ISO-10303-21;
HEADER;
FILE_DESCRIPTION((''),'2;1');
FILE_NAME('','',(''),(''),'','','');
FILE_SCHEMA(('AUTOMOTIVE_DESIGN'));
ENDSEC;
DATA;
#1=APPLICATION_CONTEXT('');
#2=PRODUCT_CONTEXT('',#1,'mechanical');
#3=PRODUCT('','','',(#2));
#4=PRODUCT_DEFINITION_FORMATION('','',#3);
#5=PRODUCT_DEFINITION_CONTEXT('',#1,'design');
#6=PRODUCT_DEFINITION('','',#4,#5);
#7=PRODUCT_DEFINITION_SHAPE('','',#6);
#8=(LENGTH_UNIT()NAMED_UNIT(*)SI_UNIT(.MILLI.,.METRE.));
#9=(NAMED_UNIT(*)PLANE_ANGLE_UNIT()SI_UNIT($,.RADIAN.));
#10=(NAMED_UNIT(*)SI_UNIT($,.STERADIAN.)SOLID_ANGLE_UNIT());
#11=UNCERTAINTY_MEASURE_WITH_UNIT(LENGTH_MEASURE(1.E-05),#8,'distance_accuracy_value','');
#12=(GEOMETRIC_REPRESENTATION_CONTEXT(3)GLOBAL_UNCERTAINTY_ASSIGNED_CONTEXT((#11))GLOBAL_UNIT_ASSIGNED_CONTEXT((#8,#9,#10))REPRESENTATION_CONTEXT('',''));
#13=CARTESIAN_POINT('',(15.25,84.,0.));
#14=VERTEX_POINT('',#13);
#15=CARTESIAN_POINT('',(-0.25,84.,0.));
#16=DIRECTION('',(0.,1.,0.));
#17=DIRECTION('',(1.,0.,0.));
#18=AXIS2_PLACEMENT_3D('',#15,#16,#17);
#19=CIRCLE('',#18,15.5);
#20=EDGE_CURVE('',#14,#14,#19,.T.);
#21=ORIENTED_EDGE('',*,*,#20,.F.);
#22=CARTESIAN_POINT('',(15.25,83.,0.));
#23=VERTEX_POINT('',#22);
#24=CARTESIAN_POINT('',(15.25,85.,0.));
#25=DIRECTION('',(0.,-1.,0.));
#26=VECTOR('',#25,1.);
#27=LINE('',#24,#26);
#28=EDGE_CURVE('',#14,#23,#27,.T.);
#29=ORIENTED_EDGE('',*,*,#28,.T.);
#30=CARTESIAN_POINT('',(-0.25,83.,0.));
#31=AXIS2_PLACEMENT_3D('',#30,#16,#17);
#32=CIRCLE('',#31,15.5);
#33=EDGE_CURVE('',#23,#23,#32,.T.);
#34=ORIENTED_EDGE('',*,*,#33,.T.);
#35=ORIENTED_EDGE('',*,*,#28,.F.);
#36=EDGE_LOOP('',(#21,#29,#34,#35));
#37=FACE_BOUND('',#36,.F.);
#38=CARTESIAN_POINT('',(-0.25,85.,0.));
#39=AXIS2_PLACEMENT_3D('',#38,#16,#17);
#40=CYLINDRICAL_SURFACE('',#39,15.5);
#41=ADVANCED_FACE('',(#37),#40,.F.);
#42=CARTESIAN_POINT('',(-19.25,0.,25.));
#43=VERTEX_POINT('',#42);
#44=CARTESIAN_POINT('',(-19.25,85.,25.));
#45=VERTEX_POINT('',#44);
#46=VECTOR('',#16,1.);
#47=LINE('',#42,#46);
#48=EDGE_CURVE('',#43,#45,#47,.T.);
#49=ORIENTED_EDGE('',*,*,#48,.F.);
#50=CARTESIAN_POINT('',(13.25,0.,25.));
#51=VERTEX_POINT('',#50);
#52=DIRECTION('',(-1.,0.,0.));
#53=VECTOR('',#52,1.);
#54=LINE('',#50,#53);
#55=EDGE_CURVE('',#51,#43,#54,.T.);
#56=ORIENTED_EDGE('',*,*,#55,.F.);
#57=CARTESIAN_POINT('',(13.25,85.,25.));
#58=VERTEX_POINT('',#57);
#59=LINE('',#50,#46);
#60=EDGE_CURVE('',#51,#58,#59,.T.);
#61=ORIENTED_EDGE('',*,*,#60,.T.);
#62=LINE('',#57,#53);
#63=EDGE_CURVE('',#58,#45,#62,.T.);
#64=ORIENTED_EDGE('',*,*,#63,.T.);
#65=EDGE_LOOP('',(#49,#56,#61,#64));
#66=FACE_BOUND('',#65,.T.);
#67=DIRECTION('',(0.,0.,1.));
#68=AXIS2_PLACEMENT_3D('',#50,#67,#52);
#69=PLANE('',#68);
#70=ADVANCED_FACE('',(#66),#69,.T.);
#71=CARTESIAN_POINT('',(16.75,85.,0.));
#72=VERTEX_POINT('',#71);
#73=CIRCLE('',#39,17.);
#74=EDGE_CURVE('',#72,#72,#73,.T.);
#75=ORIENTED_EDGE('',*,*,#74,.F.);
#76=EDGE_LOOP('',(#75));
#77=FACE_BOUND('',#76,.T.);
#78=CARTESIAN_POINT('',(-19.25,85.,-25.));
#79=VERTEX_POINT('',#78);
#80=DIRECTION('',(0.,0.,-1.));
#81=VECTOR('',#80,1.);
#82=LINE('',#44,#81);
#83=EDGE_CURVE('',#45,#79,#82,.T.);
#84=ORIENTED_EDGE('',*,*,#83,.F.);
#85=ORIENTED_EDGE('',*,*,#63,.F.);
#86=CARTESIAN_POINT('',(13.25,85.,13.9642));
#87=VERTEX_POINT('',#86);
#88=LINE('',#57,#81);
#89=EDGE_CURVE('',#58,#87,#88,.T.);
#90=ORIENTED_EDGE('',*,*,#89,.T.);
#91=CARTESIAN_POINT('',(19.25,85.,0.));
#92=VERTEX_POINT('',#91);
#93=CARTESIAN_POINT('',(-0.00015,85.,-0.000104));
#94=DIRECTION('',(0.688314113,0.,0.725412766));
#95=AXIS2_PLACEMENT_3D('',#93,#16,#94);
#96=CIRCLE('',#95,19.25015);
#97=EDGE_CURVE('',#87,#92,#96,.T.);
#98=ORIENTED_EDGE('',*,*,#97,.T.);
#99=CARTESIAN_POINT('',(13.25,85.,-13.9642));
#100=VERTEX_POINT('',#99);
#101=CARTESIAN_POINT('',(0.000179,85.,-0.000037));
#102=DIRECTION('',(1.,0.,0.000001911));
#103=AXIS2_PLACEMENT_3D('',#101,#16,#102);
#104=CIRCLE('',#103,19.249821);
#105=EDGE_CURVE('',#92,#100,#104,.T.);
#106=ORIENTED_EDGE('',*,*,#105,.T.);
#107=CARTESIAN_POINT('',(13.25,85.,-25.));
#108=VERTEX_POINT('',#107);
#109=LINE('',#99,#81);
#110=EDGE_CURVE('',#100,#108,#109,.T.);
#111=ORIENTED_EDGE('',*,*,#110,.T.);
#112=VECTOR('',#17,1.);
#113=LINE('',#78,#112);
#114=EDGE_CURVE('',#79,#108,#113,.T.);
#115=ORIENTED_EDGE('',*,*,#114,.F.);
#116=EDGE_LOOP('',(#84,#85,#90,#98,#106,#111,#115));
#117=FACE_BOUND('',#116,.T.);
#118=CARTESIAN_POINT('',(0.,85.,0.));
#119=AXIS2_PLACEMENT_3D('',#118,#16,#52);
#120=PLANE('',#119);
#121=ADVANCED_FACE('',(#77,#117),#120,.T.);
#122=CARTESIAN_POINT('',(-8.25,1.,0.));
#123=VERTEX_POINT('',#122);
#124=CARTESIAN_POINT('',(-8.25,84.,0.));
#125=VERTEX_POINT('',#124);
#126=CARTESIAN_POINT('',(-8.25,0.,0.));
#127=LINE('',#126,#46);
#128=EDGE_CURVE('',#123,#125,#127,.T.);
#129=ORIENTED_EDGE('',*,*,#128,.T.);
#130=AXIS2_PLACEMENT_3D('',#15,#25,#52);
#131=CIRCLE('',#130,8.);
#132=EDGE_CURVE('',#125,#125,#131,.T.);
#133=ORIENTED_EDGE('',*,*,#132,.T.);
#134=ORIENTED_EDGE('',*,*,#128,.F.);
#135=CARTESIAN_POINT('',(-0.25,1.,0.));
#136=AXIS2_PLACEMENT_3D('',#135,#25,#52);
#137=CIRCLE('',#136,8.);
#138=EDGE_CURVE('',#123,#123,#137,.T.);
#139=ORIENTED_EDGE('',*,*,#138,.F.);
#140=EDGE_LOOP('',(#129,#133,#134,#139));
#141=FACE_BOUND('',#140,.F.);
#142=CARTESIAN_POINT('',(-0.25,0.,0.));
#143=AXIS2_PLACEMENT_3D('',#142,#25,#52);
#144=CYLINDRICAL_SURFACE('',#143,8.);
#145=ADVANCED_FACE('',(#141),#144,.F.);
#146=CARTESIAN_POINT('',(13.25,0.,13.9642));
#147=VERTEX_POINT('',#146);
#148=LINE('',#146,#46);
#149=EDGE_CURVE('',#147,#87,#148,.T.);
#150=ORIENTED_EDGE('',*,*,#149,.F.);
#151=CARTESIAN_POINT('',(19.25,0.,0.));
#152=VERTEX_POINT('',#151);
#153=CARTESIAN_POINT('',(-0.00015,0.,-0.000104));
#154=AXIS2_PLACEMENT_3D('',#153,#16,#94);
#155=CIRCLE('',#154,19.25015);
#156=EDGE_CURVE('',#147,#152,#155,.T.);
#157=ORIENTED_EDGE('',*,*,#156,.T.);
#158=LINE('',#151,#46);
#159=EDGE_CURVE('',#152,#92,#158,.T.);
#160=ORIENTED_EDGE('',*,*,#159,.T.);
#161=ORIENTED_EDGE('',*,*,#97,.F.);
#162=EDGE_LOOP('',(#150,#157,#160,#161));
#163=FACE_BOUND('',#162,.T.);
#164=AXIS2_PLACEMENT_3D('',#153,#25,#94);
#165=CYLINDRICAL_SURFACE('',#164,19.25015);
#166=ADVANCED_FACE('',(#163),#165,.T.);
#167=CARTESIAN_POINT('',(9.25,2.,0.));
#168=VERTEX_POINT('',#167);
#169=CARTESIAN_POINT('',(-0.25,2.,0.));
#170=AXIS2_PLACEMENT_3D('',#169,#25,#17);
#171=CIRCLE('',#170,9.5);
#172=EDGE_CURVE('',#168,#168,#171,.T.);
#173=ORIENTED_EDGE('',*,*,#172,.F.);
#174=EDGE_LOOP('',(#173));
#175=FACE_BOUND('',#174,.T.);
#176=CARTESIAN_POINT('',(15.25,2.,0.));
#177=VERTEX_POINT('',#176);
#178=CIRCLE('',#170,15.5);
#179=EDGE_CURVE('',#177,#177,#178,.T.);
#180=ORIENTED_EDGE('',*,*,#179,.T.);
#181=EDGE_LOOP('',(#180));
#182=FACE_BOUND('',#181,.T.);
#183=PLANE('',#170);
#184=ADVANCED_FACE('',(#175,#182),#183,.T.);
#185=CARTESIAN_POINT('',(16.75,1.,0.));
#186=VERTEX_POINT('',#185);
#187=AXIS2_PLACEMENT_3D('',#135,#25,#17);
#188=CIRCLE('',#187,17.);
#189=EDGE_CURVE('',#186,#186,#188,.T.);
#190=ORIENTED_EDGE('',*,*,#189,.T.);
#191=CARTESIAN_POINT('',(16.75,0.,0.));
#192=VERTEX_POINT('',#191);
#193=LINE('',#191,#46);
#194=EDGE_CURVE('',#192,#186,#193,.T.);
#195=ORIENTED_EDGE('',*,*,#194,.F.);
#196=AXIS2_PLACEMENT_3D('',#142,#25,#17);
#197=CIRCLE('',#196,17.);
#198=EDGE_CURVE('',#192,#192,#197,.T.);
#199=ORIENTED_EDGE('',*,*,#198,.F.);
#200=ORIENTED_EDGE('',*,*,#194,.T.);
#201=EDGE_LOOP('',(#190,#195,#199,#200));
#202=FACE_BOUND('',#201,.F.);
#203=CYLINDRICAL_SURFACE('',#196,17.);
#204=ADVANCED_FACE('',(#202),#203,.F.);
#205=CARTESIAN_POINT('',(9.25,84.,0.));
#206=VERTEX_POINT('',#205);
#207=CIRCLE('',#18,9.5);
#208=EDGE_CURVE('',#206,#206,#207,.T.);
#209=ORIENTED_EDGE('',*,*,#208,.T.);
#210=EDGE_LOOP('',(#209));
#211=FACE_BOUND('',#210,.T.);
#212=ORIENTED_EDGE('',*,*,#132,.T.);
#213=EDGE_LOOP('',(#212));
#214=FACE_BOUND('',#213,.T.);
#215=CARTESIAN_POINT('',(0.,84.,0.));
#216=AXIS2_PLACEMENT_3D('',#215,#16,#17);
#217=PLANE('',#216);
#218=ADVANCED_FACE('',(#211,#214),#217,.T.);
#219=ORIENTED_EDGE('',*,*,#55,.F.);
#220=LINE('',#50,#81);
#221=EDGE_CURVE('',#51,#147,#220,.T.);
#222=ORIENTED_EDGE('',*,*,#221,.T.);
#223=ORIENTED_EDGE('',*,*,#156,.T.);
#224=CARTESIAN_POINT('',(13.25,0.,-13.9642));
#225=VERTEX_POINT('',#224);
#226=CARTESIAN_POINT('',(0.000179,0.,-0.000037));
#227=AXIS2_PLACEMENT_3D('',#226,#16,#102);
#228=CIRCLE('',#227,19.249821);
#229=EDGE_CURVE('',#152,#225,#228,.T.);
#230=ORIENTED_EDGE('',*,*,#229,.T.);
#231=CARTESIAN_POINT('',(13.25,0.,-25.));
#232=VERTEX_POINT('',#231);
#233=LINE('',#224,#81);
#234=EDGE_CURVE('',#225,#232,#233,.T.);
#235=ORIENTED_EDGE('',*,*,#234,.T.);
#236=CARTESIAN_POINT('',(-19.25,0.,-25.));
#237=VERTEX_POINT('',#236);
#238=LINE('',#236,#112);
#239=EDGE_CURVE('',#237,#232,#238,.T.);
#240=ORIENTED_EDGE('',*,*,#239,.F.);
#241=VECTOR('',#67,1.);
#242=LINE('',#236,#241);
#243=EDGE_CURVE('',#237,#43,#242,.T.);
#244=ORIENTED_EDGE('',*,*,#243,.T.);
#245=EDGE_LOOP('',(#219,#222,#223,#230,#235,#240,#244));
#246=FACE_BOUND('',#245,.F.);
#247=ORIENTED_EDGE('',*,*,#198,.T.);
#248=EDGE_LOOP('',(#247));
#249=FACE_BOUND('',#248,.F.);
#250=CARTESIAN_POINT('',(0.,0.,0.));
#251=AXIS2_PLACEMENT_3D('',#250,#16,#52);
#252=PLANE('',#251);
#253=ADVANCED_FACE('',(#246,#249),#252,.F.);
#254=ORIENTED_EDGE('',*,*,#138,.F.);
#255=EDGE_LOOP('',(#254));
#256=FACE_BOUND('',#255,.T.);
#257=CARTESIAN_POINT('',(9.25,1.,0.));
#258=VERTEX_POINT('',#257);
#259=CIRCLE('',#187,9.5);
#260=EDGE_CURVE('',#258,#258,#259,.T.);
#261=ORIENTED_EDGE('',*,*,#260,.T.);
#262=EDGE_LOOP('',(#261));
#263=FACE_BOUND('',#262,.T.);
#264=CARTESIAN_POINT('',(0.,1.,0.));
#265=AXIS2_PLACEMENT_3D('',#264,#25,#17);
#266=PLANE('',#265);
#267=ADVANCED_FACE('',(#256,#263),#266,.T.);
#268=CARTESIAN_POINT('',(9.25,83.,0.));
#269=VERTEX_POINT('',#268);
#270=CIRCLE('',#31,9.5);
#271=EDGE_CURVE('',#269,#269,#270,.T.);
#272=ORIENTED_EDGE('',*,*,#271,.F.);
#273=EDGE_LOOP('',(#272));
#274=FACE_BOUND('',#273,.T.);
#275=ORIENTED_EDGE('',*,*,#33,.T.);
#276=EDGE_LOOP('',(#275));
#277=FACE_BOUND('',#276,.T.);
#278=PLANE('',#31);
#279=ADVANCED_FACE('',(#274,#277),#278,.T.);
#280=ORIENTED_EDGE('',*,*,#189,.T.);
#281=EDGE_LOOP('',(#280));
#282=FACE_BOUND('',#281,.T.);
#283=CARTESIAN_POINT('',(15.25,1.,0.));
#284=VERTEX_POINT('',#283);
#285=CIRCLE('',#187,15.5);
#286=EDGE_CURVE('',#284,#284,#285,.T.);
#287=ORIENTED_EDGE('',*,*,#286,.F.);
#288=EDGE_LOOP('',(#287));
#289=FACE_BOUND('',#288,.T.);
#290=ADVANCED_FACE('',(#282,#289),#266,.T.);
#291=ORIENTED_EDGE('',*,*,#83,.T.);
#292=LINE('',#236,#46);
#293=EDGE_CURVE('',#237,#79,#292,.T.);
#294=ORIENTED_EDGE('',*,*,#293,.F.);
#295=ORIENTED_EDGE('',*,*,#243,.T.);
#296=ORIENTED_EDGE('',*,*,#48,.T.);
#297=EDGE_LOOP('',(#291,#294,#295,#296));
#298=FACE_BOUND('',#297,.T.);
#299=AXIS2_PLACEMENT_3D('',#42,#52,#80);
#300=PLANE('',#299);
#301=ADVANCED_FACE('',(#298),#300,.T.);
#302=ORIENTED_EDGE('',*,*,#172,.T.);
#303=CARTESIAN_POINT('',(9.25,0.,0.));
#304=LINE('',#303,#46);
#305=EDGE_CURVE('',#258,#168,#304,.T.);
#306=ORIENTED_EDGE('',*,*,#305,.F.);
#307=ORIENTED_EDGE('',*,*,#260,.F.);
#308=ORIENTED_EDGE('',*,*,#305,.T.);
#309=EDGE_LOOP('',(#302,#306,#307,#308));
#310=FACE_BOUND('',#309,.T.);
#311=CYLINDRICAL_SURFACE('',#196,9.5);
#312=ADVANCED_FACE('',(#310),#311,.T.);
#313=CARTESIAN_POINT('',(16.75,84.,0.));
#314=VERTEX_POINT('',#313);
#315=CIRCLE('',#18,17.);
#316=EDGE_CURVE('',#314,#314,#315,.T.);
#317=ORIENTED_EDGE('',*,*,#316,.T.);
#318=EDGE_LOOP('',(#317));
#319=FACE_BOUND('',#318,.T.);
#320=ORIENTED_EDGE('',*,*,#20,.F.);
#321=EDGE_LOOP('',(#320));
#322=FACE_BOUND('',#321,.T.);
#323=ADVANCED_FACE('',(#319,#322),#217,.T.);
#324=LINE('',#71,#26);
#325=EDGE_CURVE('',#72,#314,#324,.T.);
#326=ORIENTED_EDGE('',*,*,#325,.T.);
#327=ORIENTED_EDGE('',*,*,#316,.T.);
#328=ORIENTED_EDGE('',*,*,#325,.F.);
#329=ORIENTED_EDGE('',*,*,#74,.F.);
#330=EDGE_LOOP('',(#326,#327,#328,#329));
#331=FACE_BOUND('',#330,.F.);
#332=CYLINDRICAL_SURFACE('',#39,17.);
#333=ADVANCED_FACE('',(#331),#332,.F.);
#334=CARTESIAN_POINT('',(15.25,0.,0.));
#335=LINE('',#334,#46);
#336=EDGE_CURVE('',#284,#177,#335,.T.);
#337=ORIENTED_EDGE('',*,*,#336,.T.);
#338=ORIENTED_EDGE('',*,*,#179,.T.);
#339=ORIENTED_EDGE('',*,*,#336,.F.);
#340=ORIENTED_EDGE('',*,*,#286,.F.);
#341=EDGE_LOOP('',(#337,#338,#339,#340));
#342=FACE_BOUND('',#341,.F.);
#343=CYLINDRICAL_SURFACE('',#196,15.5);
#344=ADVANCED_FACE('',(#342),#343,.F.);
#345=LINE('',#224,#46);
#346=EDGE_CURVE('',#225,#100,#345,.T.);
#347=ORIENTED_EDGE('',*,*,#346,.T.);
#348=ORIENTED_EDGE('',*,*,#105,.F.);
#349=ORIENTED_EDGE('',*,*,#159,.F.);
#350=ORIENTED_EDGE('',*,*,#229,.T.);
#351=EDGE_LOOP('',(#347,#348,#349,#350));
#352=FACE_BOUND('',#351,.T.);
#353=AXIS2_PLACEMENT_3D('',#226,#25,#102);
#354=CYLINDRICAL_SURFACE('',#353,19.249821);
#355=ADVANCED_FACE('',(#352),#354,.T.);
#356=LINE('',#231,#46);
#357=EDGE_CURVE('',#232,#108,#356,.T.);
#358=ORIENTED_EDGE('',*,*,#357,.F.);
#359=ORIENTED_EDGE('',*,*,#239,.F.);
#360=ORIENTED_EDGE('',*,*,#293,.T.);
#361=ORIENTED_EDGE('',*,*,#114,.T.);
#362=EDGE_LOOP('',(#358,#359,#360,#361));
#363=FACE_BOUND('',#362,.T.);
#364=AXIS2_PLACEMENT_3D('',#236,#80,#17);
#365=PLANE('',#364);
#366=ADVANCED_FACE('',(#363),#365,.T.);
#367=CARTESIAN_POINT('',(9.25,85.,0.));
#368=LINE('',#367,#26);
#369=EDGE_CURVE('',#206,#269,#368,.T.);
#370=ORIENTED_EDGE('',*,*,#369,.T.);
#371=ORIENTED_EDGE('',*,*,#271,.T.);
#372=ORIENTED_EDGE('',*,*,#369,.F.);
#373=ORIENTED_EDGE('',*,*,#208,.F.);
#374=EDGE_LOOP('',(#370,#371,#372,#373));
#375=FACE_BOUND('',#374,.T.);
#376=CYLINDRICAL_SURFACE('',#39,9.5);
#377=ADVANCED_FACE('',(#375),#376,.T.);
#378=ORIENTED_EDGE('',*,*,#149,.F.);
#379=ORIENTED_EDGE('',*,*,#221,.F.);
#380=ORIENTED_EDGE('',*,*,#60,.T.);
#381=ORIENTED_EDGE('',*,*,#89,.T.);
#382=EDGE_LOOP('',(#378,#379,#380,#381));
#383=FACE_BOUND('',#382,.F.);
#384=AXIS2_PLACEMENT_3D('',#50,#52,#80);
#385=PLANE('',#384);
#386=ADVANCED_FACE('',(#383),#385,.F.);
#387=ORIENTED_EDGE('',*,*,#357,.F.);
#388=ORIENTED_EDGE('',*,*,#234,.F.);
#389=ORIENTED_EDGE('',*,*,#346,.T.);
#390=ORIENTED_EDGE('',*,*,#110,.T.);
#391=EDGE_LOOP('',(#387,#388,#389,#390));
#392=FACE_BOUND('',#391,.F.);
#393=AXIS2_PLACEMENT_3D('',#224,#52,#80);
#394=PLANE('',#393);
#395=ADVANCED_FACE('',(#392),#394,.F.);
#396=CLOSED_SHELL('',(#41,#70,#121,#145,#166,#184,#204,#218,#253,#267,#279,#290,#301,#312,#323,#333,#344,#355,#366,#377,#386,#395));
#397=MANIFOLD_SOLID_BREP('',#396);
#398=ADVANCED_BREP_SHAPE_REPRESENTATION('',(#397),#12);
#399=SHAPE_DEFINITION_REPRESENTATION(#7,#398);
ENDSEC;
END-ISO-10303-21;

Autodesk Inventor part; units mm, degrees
ref_plane "YZ Plane" through (0, 0, 0) normal (1, 0, 0) x (0, 1, 0)
ref_plane "XZ Plane" through (0, 0, 0) normal (0, 1, 0) x (-1, 0, 0)
ref_plane "XY Plane" through (0, 0, 0) normal (0, 0, 1) x (1, 0, 0)
sketch "Szkic1" plane through (0, 0, 0) normal (0, 1, 0) x (-1, 0, 0)
  line L0 (-13.25, 25) -> (19.25, 25)
  line L1 (19.25, 25) -> (19.25, -25)
  line L2 (19.25, -25) -> (-13.25, -25)
  line L3 (-19.25, 25) -> (19.25, -25) construction
  line L4 (19.25, 25) -> (-19.25, -25) construction
  line L5 (19.25, 0) -> (38.5, 0) construction
  line L6 (19.25, 0) -> (0.25, 0)
  line L7 (19.25, 0) -> (38.25, 0) construction
  circle A0 centre (0.25, 0) radius 8
  line L8 (19.25, 25) -> (-13.25, 25)
  line L9 (19.25, 25) -> (51.75, 25) construction
  arc A1 (-19.25, 0) -> (-13.25, -13.9642) centre (0, 0) ccw
  arc A2 (-13.25, 13.9642) -> (-19.25, 0) centre (0, 0) ccw
  line L10 (-13.25, 25) -> (-13.25, 13.9642)
  line L11 (-13.25, -13.9642) -> (-13.25, -25)
  point P0 (0, 0)
  dimension "d1" = 50
  dimension "d4" = 19
  dimension "d5" = 180
  dimension "d6" = 16
  dimension "d7" = 32.5
  dimension "d8" = 180
extrude "Wyciągnięcie proste1" add sketch "Szkic1" along normal blind 85
sketch "Szkic2" plane through (0, 0, 0) normal (0, -1, 0) x (1, 0, 0)
  circle A0 centre (-0.25, 0) radius 8 projected
  circle A1 centre (-0.25, 0) radius 9.5
  circle A2 centre (-0.25, 0) radius 17
  circle A3 centre (-0.25, 0) radius 15.5
  point P0 (0, 0)
  dimension "d11" = 19
  dimension "d12" = 34
  dimension "d13" = 31
extrude "Wyciągnięcie proste2" cut sketch "Szkic2" against normal blind 1
sketch "Szkic3" plane through (-0.25, 0, 0) normal (0, -1, 0) x (1, 0, 0)
  circle A0 centre (0, 0) radius 9.5 projected
  circle A1 centre (0, 0) radius 15.5 projected
  point P0 (0.25, 0)
extrude "Wyciągnięcie proste3" cut sketch "Szkic3" against normal blind 2
sketch "Szkic4" plane through (0, 85, 0) normal (0, 1, 0) x (1, 0, 0)
  circle A0 centre (-0.25, 0) radius 8
  circle A1 centre (-0.25, 0) radius 9.5
  circle A2 centre (-0.25, 0) radius 17
  circle A3 centre (-0.25, 0) radius 15.5
  point P0 (0, 0)
  point P1 (0, 0)
  dimension "d18" = 19
  dimension "d19" = 34
  dimension "d20" = 31
extrude "Wyciągnięcie proste4" cut sketch "Szkic4" against normal blind 1
sketch "Szkic5" plane through (-0.25, 85, 0) normal (0, 1, 0) x (1, 0, 0)
  circle A0 centre (0, 0) radius 9.5 projected
  circle A1 centre (0, 0) radius 15.5 projected
  point P0 (0.25, 0)
extrude "Wyciągnięcie proste5" cut sketch "Szkic5" against normal blind 2
properties part number "Łożysko liniowe w obudowie SMAG16UU-L"
